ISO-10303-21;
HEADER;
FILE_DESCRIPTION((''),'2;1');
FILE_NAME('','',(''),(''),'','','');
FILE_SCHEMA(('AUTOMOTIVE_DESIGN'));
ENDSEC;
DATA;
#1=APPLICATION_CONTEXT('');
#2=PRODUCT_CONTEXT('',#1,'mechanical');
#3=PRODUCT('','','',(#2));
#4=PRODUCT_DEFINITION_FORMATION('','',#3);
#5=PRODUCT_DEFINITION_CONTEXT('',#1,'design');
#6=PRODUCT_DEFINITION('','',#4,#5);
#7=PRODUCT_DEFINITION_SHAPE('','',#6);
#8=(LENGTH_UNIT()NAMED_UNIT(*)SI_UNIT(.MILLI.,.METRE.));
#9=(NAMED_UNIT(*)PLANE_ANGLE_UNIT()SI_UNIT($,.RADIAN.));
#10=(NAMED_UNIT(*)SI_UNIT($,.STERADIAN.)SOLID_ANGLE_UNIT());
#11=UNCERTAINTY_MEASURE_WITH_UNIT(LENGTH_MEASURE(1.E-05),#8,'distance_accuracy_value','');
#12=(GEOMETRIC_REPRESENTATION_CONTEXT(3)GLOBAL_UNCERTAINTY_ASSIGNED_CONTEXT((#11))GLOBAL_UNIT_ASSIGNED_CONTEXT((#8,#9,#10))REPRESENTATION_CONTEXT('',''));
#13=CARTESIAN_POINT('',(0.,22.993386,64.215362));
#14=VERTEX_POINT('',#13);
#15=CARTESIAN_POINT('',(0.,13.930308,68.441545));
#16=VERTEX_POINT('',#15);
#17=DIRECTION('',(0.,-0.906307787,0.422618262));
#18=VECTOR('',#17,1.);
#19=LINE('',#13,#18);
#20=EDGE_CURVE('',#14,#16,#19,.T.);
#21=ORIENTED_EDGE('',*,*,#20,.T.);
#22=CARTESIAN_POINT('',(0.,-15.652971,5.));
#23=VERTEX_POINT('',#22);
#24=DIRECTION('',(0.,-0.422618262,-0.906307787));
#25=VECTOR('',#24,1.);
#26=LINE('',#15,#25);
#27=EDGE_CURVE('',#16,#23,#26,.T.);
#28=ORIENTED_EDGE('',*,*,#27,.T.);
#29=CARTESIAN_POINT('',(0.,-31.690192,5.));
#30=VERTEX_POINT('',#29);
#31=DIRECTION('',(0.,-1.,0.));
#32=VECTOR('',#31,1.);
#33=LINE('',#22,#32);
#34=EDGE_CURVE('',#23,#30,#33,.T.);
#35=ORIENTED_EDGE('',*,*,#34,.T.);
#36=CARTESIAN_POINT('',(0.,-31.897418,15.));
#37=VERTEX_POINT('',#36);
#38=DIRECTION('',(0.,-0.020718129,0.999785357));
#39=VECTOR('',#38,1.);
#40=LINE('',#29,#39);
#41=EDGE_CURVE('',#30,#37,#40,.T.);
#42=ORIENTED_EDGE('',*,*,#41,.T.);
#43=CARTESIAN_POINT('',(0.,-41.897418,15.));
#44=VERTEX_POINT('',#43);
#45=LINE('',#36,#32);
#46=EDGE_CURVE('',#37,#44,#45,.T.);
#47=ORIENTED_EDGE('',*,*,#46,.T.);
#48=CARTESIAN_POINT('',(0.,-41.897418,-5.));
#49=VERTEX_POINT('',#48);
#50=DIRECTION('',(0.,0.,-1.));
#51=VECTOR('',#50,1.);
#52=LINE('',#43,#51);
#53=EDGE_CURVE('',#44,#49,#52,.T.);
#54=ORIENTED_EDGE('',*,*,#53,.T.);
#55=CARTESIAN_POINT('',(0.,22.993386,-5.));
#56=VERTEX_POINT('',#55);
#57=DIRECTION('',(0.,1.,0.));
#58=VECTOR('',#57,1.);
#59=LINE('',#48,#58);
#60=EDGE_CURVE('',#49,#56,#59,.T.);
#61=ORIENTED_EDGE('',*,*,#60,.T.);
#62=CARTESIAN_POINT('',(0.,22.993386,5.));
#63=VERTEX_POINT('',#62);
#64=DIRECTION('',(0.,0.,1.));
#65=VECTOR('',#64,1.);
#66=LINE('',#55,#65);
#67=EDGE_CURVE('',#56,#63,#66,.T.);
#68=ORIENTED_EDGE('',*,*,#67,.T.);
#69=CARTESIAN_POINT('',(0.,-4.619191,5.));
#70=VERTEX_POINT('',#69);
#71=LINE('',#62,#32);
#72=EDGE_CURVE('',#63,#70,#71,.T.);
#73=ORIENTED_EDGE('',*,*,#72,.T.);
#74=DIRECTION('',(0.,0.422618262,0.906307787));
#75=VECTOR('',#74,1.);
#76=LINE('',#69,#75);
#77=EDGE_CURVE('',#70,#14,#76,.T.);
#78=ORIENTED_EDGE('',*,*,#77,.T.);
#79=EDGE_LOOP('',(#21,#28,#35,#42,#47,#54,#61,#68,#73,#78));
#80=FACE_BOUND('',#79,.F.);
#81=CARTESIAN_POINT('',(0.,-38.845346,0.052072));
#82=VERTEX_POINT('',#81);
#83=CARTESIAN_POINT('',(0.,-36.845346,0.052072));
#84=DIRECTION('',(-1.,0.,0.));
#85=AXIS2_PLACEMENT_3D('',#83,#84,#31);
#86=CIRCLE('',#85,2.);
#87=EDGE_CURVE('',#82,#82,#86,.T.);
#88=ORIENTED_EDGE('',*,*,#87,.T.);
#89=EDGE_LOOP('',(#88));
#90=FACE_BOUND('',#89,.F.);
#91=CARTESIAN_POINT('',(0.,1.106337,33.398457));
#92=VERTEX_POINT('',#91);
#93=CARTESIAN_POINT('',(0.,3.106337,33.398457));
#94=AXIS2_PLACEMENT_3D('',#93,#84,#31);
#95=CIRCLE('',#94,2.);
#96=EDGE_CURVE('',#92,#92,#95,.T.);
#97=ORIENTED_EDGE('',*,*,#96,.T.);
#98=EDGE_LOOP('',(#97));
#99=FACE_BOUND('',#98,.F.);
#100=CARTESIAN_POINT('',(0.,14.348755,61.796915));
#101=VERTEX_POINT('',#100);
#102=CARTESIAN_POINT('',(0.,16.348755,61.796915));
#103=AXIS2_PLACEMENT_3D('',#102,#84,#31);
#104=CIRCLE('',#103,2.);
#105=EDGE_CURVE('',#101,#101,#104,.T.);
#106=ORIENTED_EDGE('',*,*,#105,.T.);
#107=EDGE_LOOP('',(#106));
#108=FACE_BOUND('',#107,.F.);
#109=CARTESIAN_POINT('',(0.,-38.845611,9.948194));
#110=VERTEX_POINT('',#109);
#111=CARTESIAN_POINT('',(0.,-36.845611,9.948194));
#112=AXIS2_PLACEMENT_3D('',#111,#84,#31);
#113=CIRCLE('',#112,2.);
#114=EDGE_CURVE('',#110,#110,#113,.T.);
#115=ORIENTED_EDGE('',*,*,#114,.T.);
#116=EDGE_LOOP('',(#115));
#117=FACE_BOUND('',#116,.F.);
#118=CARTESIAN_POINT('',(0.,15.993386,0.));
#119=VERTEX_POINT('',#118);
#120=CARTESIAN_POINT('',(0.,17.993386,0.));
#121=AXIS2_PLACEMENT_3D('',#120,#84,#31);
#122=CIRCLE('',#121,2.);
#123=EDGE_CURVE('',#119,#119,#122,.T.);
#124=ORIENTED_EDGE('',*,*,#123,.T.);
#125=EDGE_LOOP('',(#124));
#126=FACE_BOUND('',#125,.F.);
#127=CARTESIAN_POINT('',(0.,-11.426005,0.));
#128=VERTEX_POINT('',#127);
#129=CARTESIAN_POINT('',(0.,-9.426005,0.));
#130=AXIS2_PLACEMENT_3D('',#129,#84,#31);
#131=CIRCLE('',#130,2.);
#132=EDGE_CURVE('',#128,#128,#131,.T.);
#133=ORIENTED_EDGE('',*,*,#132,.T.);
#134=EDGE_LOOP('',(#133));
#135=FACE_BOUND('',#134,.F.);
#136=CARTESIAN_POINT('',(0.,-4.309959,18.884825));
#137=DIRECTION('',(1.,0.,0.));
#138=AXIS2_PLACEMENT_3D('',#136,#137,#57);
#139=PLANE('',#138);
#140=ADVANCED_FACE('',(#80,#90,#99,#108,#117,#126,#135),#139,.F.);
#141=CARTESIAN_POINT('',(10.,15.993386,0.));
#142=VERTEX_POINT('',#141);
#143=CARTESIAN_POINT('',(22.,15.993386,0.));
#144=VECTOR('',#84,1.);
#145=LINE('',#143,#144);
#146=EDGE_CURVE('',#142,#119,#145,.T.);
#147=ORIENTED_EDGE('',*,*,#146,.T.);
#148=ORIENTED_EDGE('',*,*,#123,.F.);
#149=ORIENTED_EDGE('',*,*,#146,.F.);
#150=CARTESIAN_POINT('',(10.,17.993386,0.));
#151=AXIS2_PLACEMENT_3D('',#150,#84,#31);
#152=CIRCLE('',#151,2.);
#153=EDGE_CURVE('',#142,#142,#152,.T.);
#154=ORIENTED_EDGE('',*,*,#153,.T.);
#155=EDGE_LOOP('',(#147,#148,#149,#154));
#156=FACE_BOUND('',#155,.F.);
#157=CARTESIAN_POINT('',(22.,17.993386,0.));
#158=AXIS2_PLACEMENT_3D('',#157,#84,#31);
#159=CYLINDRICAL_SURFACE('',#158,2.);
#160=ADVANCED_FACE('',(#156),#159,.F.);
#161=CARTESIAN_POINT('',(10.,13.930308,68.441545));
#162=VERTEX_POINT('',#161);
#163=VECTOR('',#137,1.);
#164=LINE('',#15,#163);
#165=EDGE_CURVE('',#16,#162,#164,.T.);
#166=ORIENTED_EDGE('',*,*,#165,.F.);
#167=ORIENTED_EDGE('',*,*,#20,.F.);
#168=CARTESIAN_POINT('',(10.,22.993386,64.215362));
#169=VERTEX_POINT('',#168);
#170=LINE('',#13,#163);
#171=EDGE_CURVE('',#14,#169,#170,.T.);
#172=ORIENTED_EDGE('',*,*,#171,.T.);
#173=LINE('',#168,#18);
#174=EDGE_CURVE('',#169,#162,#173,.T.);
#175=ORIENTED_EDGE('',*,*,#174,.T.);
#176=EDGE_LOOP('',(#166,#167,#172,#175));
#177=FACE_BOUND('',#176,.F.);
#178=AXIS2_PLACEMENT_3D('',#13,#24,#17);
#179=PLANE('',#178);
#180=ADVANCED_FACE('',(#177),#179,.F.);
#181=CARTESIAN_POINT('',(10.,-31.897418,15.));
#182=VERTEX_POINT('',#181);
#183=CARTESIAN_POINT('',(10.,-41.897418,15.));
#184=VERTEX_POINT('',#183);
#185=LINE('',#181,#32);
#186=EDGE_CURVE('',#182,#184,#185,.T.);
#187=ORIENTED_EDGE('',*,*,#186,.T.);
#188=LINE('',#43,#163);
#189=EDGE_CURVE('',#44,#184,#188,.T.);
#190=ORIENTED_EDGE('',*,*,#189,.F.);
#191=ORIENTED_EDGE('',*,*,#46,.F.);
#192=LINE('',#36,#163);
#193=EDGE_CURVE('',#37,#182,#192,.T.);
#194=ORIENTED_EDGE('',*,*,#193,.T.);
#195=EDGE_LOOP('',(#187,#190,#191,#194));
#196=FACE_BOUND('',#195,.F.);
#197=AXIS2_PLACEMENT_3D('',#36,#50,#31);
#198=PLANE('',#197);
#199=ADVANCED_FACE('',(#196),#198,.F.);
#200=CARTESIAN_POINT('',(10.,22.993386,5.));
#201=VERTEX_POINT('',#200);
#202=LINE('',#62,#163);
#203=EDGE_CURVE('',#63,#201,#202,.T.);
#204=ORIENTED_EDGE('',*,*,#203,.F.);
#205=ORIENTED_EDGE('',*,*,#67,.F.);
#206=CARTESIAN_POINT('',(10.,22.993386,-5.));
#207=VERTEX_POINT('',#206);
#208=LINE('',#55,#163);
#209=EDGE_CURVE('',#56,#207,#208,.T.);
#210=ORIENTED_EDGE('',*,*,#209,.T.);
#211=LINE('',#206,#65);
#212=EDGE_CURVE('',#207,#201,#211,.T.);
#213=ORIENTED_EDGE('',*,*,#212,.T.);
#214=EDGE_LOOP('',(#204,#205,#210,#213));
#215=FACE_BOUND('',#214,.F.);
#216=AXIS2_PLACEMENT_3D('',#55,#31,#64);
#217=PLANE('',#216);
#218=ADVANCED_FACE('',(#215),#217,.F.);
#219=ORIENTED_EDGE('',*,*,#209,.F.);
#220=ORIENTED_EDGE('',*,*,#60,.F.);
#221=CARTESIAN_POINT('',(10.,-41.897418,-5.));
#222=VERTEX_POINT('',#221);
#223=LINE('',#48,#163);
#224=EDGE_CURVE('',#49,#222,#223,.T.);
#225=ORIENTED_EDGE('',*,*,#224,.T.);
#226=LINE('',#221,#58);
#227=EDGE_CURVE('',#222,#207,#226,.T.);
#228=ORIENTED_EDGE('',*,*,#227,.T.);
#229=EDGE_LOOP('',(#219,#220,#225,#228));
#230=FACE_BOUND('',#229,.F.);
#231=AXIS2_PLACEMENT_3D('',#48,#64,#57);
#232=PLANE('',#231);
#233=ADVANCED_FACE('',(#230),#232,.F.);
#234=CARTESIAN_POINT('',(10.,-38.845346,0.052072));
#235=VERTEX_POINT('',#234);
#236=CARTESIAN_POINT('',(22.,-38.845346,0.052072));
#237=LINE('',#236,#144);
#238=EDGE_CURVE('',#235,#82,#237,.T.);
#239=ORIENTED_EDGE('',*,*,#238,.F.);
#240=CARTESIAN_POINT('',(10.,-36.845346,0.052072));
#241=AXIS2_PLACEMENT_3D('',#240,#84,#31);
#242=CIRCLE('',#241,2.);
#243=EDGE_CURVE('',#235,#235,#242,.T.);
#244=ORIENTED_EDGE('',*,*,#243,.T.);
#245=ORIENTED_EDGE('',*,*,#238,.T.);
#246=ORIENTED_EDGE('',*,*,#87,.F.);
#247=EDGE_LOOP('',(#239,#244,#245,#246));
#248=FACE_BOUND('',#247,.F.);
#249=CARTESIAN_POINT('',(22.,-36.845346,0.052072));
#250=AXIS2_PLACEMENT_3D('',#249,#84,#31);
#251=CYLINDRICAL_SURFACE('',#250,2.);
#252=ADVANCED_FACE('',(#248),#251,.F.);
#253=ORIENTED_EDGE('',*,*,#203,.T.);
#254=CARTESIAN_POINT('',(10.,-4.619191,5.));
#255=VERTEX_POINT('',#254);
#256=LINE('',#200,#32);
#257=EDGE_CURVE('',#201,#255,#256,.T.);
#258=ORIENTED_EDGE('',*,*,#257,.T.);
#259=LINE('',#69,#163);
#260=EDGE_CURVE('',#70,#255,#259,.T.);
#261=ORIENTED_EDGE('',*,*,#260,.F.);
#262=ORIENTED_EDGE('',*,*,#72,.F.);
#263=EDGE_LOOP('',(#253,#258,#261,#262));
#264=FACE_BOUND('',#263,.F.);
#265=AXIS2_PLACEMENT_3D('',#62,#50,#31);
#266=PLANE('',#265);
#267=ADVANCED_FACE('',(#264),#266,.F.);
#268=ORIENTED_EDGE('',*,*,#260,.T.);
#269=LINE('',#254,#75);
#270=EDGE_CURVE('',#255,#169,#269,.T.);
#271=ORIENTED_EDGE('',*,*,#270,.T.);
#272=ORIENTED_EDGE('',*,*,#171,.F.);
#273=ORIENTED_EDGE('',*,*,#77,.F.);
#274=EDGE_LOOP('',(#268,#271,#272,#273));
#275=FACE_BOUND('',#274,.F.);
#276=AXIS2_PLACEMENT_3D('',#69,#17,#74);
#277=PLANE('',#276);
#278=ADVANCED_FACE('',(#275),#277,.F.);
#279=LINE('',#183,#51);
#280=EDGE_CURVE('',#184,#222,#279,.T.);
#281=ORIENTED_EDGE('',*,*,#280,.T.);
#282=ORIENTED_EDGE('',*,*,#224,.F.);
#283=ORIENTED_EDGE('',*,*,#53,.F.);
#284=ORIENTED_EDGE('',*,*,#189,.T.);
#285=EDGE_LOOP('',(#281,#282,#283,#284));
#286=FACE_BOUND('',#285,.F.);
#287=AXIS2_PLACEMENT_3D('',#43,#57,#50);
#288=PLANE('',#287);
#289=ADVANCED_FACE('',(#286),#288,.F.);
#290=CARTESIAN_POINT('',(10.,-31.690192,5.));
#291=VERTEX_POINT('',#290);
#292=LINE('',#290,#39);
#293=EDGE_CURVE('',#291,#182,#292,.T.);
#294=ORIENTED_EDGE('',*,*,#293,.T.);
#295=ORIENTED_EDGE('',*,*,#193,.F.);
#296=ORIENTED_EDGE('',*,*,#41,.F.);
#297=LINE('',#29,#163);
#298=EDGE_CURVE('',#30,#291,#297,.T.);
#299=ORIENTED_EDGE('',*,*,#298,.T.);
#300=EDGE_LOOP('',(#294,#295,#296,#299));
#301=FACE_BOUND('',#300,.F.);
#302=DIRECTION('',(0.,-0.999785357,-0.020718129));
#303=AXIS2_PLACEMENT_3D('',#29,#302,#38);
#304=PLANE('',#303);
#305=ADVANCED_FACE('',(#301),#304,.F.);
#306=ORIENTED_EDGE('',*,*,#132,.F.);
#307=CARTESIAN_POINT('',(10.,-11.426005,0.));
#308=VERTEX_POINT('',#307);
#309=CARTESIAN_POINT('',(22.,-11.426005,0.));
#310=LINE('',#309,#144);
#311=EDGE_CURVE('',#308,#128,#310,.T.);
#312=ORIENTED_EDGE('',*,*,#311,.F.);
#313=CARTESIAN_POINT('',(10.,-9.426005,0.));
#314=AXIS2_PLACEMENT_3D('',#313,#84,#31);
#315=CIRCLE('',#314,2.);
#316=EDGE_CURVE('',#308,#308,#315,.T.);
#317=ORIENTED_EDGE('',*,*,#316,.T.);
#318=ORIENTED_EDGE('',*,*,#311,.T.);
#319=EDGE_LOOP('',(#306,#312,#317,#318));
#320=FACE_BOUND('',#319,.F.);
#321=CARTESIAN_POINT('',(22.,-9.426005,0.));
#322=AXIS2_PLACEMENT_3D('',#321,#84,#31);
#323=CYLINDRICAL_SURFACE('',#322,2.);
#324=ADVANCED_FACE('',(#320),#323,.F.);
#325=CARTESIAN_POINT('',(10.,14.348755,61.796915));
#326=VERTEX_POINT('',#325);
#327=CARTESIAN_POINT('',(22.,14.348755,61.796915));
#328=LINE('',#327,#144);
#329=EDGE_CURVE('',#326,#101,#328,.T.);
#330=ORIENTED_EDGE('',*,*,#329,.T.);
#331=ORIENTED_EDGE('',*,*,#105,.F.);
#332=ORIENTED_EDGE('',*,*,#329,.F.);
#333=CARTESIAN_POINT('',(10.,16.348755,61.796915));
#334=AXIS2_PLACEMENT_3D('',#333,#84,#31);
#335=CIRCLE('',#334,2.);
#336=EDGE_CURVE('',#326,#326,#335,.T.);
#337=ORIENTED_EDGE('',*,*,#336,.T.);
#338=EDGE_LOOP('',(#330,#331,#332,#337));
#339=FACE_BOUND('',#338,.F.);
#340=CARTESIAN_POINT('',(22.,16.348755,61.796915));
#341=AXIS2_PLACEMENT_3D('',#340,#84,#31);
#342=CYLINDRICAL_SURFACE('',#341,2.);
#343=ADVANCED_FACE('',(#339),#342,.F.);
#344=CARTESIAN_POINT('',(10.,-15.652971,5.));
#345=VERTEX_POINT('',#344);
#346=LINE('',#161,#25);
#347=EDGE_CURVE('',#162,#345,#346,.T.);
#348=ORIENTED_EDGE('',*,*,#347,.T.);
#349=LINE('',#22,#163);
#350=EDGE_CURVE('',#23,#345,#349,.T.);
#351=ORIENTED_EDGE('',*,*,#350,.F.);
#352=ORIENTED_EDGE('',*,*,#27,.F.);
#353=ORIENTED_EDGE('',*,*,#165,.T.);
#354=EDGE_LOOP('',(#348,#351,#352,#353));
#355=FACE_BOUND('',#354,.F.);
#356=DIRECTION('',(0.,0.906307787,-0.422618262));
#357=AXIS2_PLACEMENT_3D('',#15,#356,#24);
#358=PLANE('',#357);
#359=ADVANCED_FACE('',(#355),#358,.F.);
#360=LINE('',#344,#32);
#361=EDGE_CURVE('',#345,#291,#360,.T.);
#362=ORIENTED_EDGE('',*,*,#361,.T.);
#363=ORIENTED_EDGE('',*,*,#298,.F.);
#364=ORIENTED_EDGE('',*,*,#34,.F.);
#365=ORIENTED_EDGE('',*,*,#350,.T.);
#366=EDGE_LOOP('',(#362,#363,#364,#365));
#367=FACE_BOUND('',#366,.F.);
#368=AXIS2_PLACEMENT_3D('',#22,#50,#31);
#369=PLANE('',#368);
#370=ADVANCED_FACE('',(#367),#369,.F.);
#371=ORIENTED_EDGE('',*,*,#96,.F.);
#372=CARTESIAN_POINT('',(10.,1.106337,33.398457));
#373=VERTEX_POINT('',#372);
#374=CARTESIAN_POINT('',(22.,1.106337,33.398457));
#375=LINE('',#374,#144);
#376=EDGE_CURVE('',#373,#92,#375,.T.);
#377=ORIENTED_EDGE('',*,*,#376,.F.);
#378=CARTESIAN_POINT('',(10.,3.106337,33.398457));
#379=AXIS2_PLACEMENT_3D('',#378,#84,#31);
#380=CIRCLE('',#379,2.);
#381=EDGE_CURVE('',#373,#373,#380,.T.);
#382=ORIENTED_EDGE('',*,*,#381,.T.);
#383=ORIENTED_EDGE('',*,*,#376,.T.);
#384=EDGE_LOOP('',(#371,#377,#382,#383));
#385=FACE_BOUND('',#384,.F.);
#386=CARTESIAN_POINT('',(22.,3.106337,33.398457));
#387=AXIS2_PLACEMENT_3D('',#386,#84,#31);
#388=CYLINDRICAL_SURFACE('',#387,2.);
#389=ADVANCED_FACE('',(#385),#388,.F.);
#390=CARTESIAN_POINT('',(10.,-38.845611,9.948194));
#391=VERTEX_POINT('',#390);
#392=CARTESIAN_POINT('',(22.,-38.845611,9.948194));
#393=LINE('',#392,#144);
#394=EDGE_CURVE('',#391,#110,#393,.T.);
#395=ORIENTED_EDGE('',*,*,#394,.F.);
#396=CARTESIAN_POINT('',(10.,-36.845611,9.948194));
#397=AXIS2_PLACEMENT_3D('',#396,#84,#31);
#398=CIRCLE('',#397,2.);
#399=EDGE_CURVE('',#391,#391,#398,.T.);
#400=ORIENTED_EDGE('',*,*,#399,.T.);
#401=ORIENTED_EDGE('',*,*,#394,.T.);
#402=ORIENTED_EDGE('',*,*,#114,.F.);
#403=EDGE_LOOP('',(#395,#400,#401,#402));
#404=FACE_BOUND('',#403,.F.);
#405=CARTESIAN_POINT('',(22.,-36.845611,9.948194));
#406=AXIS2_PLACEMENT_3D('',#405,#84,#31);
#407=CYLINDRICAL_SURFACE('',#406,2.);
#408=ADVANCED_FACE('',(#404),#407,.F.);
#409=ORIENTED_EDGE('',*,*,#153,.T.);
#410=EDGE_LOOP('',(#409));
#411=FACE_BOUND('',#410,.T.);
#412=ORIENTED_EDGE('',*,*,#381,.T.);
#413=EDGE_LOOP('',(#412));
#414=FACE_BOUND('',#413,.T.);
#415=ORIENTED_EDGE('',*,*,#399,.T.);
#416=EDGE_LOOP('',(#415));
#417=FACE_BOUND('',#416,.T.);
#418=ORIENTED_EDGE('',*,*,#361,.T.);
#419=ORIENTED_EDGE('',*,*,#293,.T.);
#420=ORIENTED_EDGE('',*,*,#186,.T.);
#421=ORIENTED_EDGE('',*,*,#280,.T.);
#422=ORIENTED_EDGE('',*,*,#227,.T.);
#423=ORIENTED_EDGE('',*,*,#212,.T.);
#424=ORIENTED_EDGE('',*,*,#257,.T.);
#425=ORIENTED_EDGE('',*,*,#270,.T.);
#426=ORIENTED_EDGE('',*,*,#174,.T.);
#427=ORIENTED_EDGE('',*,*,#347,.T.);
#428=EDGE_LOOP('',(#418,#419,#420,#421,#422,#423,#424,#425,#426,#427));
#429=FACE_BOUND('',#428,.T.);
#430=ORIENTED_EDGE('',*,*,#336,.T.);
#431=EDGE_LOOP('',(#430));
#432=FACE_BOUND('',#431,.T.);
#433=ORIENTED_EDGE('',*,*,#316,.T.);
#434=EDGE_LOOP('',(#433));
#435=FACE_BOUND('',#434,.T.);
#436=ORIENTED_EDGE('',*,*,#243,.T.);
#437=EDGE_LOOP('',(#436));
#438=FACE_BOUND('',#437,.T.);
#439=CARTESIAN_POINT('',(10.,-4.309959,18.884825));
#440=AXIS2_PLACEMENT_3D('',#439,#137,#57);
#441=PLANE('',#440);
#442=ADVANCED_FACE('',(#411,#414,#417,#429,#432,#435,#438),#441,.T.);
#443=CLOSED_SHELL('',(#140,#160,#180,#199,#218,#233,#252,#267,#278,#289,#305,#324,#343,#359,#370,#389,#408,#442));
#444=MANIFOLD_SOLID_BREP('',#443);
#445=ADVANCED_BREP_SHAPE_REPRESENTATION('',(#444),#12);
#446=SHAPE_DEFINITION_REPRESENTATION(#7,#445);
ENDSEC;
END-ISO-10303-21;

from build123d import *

# Parameters (mm, degrees)
F1_DEPTH = 10
F3_D     = 4
F3_DEPTH = 12
F3_TIP   = 1.2017212381


# Not quite as in the source:
# - a feature names something its author has since deleted; it is built from what else it names


with BuildPart() as f1:
    # F0 (on Right) → F1 (new body)
    with BuildSketch(Plane.YZ):
        Polygon((22.9933855712, -5), (22.9933855712, 5), (-4.6191914314, 5), (22.9933855712, 64.2153624752), (13.9303077009, 68.4415450926), (-15.652970621, 5), (-31.6901920953, 5), (-31.8974178605, 15), (-41.8974178605, 15), (-41.8974178605, -5), align=None)
    extrude(amount=F1_DEPTH)

    # F3
    with Locations(Plane.YZ.offset(10)):
        with Locations((16.3487553273, 61.7969148487), (17.9933855712, 0), (-9.4260048308, 0), (-36.8453457878, 0.0520720727), (3.1063371506, 33.3984574243), (-36.8456114192, 9.9481935587)):
            Hole(F3_D / 2, depth=F3_DEPTH)
            with Locations((0, 0, -(F3_DEPTH + F3_TIP / 2))):  # 118° drill point
                Cone(0, F3_D / 2, F3_TIP, mode=Mode.SUBTRACT)


solid = f1.part
